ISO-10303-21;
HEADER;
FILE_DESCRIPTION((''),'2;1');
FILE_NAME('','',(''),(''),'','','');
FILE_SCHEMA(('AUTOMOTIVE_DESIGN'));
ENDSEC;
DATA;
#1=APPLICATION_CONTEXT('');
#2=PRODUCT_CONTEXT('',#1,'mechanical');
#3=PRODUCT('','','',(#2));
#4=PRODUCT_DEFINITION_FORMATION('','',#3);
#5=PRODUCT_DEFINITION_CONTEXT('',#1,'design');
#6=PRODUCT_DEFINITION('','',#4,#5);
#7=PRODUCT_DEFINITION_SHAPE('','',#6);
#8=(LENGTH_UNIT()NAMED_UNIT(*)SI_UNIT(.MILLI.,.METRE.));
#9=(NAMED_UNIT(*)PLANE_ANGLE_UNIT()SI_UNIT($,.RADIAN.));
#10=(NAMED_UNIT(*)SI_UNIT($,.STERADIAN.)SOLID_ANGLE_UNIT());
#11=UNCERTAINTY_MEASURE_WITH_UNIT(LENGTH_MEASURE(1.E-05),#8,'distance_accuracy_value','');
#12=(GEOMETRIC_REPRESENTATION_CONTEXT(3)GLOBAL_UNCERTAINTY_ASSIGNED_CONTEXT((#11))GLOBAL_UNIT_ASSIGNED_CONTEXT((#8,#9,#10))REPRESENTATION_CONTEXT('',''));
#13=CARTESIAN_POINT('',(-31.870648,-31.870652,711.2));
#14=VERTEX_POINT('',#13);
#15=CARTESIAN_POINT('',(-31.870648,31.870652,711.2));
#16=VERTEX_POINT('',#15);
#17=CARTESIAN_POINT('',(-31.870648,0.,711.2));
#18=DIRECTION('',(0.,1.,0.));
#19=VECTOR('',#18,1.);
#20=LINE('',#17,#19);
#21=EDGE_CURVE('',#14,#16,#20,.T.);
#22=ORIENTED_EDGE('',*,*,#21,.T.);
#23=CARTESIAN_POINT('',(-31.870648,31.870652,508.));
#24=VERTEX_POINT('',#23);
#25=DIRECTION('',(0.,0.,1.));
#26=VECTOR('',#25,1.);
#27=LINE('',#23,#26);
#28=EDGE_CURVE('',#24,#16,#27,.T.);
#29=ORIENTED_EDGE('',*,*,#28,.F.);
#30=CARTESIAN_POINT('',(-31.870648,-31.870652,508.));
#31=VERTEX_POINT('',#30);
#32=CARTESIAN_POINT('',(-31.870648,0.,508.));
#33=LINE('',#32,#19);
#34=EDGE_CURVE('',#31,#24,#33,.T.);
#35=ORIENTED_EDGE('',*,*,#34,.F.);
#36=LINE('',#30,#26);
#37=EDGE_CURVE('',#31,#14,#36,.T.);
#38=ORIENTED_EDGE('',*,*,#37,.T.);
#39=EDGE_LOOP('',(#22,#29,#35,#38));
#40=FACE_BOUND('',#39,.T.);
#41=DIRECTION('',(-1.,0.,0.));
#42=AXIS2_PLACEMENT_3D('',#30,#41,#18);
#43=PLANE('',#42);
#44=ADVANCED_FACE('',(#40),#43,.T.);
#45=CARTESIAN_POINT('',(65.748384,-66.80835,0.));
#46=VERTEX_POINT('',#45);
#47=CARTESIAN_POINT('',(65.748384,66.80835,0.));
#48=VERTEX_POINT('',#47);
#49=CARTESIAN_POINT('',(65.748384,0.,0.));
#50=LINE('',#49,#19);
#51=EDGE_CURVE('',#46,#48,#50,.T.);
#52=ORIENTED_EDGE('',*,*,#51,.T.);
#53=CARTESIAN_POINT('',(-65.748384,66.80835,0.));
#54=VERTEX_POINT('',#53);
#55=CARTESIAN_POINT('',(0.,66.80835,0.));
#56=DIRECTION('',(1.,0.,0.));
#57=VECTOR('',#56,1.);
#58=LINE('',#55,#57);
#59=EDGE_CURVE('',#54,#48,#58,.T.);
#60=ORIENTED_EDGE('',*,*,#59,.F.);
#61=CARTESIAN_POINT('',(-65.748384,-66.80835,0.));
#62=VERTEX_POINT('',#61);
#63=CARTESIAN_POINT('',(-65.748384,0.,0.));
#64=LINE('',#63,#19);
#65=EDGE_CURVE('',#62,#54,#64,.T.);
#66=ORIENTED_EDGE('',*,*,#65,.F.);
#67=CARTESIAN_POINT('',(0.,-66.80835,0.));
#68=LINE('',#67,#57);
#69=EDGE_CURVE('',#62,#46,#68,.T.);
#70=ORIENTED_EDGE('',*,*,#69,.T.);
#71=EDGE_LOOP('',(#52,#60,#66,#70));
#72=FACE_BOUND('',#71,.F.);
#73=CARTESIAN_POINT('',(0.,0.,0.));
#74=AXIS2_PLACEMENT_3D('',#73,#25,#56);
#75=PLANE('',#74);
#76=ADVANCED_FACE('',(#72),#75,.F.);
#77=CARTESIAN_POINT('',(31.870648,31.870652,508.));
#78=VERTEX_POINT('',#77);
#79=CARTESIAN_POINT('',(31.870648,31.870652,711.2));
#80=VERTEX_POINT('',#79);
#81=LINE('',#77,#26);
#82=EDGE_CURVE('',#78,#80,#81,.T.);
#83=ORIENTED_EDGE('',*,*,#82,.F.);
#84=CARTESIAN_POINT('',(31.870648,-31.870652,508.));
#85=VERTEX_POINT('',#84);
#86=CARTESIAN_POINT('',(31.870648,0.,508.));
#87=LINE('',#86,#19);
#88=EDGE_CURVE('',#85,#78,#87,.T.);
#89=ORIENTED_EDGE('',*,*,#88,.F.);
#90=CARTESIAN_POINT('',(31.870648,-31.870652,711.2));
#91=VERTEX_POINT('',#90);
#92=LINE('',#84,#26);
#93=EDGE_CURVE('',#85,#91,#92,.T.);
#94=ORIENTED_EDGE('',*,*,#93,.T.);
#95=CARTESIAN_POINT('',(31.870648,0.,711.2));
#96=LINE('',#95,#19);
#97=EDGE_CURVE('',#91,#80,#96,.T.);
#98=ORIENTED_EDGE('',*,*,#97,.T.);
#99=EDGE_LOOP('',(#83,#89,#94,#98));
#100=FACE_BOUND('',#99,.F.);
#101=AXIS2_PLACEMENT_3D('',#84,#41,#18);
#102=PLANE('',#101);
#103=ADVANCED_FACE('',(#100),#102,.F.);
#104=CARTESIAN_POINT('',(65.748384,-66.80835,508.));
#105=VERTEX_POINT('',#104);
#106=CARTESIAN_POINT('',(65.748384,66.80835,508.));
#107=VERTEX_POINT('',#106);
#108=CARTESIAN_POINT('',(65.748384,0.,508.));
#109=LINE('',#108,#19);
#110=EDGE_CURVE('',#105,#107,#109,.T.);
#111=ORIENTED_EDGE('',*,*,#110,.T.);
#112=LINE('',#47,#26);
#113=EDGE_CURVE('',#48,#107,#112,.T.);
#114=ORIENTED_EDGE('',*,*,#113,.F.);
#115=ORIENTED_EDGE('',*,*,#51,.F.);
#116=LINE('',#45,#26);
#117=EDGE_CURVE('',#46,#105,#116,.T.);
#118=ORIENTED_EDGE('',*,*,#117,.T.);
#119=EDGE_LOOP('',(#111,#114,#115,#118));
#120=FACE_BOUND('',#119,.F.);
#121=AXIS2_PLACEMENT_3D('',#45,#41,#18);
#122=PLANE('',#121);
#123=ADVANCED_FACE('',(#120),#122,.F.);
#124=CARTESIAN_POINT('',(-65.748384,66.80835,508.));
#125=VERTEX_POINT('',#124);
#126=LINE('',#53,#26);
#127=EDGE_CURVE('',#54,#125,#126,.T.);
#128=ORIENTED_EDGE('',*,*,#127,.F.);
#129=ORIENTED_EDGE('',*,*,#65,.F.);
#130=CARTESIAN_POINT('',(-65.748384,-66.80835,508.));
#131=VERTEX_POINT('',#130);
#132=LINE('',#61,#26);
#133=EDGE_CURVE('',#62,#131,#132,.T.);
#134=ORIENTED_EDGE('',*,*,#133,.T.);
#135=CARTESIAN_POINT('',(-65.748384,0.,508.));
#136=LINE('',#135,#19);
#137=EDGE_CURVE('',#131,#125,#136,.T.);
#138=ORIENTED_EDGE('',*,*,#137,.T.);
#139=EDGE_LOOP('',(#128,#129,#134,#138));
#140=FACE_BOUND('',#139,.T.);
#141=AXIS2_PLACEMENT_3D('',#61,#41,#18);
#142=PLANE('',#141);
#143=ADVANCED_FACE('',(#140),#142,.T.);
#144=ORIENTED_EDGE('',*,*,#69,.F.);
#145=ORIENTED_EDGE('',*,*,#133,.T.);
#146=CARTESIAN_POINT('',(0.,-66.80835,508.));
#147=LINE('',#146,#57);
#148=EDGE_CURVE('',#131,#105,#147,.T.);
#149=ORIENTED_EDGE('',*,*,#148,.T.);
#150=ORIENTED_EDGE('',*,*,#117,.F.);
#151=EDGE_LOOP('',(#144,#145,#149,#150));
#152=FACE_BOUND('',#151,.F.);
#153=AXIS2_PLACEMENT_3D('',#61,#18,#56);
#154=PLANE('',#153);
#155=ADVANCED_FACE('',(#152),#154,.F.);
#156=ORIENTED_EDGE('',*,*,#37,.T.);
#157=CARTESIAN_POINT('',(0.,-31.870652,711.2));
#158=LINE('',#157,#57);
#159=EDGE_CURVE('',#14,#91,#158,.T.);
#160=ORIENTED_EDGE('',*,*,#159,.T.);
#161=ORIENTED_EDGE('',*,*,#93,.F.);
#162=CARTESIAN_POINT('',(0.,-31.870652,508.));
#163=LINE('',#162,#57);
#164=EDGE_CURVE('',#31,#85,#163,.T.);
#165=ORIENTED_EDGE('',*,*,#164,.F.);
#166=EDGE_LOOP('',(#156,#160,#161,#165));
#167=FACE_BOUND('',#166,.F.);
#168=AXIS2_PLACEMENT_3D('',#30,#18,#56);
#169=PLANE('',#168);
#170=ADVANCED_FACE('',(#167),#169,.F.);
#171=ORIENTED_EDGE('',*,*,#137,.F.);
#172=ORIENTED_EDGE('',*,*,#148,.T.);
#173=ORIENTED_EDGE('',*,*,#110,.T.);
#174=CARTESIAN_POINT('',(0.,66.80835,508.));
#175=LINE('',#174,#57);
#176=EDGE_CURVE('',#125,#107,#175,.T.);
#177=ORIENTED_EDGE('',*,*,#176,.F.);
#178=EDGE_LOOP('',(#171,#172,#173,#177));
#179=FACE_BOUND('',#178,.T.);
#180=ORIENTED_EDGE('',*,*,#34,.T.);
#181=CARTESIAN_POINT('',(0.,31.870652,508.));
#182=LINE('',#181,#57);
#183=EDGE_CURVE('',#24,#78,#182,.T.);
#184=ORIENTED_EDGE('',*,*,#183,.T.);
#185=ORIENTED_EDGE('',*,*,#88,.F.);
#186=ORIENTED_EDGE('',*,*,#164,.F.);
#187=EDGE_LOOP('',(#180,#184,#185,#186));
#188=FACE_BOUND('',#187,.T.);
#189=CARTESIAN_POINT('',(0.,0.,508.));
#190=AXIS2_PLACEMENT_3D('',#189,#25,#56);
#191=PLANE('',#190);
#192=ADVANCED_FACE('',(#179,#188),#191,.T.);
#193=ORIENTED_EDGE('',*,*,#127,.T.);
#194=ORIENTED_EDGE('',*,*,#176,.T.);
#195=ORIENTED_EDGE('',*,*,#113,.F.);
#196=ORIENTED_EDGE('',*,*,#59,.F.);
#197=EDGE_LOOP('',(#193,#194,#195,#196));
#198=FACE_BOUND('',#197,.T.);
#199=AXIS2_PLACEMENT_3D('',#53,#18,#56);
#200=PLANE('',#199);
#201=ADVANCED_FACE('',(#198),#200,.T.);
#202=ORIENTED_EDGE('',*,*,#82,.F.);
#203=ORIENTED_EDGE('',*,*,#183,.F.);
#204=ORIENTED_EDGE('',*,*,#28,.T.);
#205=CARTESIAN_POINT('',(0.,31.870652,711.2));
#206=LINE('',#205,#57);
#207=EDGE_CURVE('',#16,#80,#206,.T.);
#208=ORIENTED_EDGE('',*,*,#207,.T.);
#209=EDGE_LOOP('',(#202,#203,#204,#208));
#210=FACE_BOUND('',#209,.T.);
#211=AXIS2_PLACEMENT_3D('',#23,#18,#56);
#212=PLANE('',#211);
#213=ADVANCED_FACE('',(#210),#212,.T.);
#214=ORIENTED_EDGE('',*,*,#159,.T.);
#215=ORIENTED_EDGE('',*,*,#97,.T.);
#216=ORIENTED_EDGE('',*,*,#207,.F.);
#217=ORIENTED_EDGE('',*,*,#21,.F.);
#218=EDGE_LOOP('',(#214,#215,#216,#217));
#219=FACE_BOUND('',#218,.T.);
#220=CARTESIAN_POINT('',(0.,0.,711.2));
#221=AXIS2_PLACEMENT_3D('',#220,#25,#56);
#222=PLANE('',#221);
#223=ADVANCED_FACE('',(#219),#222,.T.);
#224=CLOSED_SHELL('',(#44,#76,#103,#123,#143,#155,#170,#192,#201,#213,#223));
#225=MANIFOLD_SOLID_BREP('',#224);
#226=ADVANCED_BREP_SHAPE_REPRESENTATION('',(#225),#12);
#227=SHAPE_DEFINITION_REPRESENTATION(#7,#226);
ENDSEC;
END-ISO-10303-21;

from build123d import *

# Parameters (mm, degrees)
F0_W     = 131.4967681688
F0_H     = 133.6167007685
F1_DEPTH = 508
F2_W     = 63.7412965298
F2_H     = 63.7413039804
F3_DEPTH = 203.2


# Not quite as in the source:
# - the program builds the solid bodies; features that only make, move or delete a surface that nothing else refers to are left out


with BuildPart() as f1:
    # F0 (on Top) → F1 (new body)
    with BuildSketch(Plane.XY):
        Rectangle(F0_W, F0_H)
    extrude(amount=F1_DEPTH)

    # F2 (on face) → F3 (join)
    with BuildSketch(Plane.XY.offset(508)):
        Rectangle(F2_W, F2_H)
    extrude(amount=F3_DEPTH)


solid = f1.part
